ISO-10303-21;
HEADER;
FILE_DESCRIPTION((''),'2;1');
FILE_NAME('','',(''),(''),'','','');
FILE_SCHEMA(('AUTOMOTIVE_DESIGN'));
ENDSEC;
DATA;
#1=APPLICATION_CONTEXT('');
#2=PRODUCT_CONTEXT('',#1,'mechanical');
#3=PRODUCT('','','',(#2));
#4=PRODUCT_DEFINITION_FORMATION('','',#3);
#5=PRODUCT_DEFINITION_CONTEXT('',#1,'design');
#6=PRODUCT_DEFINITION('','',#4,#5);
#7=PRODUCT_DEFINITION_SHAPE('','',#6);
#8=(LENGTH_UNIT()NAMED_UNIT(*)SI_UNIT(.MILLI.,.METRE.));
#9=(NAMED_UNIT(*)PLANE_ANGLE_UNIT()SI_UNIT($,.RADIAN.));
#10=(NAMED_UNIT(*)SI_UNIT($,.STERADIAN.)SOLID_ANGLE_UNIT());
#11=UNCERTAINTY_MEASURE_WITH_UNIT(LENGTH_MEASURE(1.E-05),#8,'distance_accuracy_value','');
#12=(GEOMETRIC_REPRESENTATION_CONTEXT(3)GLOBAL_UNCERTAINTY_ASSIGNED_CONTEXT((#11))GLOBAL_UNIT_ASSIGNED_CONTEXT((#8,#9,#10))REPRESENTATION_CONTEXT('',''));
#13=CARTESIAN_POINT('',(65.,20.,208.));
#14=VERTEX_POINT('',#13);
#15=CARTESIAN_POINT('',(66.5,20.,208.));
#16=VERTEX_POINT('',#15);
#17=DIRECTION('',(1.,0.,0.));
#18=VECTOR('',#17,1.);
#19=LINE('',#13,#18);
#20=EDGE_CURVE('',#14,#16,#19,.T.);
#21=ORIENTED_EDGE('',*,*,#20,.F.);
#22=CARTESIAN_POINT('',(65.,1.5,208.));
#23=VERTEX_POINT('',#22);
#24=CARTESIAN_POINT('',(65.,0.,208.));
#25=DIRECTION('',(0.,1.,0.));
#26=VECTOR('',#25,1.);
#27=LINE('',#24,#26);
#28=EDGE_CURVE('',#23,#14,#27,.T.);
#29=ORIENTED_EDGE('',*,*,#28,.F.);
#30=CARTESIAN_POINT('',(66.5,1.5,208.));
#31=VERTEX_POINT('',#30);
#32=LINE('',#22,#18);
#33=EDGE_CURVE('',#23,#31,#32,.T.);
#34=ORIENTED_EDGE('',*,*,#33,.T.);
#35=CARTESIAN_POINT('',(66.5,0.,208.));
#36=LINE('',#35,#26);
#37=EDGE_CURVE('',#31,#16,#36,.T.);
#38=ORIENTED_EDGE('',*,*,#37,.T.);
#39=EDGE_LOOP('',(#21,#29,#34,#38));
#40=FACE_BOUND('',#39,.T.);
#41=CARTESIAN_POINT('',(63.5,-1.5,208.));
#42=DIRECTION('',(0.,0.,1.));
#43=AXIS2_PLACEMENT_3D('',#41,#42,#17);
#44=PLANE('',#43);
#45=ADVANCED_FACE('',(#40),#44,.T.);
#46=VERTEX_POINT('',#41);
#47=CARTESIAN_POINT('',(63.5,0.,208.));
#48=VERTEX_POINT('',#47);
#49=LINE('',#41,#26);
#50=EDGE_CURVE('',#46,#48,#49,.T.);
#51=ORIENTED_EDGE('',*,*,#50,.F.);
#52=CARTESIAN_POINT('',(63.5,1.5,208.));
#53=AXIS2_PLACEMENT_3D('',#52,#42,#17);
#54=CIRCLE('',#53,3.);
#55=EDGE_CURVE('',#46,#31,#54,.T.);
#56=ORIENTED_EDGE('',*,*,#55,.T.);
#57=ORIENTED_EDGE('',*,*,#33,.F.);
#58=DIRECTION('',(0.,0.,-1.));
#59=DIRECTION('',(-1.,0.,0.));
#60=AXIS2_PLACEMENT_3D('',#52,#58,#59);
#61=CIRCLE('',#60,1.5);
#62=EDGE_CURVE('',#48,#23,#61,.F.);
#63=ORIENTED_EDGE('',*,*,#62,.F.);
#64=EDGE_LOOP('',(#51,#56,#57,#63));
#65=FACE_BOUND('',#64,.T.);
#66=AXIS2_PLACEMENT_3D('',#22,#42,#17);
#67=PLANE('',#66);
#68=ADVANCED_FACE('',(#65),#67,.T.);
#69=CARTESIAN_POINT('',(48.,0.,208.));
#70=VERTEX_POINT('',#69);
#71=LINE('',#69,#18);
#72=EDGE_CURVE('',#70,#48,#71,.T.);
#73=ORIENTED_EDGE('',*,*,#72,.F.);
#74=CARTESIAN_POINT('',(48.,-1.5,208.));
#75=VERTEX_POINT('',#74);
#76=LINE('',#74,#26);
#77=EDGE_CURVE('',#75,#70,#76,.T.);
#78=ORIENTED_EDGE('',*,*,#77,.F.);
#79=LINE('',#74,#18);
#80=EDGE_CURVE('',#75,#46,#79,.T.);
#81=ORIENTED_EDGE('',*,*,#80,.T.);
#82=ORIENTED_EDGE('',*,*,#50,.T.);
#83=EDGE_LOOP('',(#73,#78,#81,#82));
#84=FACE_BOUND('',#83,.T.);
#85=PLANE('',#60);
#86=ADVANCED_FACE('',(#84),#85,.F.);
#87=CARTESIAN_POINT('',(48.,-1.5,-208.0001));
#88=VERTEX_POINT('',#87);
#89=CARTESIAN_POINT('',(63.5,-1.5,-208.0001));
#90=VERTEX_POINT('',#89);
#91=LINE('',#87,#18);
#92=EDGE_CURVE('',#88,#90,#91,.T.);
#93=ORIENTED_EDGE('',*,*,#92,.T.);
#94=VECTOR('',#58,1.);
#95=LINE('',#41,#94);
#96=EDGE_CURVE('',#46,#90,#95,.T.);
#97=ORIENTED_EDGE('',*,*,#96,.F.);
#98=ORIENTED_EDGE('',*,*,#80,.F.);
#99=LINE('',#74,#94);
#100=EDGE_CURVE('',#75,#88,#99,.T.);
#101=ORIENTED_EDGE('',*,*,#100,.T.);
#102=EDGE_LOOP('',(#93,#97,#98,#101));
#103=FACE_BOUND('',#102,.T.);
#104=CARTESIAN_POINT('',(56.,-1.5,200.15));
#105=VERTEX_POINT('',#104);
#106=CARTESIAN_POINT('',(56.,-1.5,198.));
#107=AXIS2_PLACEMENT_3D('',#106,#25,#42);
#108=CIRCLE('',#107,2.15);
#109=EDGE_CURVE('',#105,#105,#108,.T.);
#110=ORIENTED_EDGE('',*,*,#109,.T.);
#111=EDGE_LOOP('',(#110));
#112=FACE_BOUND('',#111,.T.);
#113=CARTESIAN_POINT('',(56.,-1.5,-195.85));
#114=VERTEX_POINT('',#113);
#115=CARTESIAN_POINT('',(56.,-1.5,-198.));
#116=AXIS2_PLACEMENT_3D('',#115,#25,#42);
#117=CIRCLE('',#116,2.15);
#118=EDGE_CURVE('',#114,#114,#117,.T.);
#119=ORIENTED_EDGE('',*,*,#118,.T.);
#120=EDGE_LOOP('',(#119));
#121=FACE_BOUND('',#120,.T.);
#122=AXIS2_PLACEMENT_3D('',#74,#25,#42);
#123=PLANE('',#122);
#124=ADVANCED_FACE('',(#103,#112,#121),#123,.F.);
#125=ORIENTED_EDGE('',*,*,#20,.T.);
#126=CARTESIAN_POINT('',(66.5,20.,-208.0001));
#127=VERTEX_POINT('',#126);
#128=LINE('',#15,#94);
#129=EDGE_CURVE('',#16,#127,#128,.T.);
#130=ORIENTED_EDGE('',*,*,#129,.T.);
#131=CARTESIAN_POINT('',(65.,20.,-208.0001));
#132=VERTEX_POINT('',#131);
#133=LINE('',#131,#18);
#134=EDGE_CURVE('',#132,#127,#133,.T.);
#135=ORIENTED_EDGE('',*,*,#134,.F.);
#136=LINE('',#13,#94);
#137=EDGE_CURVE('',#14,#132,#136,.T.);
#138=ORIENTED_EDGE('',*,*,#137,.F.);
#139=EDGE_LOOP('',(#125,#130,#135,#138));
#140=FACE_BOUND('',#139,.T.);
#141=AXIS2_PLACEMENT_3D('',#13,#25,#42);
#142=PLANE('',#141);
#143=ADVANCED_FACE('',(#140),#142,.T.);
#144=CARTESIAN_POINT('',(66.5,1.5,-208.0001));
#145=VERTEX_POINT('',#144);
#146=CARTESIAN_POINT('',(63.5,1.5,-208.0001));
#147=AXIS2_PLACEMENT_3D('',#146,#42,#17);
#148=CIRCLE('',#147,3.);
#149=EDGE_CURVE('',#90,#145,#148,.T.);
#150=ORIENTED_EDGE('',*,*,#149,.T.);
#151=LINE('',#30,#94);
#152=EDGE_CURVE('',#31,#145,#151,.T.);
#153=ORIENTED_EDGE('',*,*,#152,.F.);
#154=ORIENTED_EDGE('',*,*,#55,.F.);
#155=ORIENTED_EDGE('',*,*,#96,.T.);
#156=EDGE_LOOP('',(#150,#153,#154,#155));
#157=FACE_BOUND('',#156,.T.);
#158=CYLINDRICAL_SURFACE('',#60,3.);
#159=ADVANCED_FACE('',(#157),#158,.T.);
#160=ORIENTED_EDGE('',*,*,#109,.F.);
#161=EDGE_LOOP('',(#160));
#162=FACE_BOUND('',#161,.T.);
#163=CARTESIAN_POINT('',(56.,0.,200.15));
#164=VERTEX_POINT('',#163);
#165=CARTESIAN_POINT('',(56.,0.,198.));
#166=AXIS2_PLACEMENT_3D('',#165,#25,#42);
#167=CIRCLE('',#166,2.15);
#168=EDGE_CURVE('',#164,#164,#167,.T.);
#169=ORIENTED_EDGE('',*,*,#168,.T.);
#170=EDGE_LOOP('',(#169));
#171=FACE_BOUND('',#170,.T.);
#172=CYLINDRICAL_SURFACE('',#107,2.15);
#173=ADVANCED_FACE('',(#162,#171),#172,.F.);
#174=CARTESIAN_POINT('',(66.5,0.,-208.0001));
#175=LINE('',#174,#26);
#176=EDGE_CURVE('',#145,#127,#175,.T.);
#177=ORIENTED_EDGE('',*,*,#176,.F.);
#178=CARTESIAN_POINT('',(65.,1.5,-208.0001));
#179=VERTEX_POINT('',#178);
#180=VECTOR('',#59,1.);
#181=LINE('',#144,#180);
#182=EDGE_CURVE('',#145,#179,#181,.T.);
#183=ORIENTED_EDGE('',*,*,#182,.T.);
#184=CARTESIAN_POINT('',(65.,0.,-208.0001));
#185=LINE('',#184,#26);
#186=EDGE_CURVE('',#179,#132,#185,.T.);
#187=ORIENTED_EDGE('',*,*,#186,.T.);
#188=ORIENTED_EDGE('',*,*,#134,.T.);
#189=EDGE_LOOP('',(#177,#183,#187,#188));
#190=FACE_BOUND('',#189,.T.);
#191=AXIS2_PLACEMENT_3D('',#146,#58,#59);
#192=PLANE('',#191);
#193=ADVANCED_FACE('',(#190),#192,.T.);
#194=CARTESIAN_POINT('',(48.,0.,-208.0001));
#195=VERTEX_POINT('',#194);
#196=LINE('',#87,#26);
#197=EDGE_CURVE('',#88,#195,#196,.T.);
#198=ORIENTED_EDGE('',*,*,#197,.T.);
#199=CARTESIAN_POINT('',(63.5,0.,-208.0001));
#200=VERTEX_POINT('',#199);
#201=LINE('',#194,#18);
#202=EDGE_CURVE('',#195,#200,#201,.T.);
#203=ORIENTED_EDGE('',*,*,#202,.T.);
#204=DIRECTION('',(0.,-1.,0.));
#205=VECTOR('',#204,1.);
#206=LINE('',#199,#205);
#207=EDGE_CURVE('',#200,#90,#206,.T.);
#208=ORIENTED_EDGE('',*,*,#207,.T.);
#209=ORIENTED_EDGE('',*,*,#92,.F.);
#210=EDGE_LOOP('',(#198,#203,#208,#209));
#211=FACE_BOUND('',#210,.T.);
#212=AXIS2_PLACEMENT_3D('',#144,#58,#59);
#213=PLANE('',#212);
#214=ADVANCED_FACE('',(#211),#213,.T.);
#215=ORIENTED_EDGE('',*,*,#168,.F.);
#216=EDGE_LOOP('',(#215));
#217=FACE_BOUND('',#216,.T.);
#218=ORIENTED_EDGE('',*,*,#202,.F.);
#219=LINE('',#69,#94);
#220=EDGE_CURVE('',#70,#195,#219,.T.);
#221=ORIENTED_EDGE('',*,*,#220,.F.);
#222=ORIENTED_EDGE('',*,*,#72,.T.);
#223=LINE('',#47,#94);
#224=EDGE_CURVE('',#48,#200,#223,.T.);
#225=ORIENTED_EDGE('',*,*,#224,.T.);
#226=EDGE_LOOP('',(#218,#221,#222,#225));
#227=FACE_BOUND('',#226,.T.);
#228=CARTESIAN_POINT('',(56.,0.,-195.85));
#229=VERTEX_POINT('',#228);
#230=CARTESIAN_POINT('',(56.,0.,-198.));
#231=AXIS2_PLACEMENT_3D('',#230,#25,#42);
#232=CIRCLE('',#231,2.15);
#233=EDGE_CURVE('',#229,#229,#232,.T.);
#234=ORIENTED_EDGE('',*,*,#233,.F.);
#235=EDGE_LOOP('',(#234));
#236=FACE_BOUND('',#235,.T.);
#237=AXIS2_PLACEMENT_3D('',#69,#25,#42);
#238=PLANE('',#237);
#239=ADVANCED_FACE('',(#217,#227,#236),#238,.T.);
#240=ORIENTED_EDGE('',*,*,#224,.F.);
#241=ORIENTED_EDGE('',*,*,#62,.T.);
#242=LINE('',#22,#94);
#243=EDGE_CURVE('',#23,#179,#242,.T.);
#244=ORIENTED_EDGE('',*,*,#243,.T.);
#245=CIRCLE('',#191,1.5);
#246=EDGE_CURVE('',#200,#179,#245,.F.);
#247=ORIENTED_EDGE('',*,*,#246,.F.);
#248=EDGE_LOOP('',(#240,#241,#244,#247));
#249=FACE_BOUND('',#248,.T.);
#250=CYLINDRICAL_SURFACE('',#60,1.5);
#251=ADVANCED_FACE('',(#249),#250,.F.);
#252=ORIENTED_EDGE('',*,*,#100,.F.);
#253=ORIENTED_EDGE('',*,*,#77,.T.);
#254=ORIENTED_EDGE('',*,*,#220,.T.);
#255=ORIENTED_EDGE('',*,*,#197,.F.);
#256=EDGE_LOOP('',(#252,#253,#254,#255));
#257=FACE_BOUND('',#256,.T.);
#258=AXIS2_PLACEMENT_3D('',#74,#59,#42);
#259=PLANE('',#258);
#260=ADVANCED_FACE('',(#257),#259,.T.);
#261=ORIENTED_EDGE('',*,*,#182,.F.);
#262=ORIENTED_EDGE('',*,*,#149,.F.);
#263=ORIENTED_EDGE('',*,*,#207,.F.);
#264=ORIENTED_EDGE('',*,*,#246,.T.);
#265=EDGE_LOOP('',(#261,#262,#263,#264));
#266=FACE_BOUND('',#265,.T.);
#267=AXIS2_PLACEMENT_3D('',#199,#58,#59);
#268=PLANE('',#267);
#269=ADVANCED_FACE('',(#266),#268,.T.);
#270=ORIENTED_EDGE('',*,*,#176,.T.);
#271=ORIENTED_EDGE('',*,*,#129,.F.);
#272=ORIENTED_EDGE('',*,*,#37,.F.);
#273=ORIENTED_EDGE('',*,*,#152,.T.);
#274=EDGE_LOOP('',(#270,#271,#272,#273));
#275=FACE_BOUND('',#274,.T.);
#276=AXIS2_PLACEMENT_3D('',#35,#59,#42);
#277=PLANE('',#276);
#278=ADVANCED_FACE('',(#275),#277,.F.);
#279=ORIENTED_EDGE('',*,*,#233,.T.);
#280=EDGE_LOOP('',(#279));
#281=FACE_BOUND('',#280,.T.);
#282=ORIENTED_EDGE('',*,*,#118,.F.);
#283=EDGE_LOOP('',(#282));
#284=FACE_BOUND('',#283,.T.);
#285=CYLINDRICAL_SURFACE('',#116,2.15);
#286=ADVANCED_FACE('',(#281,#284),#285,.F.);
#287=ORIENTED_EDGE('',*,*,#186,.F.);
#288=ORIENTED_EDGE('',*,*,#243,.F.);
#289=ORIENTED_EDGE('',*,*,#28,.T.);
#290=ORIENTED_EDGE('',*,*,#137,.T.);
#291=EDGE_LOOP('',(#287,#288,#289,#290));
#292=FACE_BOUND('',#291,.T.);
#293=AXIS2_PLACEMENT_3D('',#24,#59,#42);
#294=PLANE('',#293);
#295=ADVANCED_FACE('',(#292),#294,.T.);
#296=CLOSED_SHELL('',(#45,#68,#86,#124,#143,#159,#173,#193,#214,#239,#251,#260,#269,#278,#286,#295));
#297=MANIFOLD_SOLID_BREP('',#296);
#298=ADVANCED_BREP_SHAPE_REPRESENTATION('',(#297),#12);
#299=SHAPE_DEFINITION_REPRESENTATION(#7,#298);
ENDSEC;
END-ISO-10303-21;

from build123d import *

# Parameters (mm, degrees)
SM_GUIDE_DEPTH  = 416
SK_HOLES_R      = 2.15
CUT_HOLES_DEPTH = 1.5


# Sheet-metal steps are written as plain solids
with BuildPart() as part:
    # SK_Guide → SM_Guide (new body)
    with BuildSketch(Plane.XY.offset(-208)):
        with BuildLine():
            Line((48, 0), (63.5, 0))
            ThreePointArc((63.5, 0), (64.560660172, 0.439339828), (65, 1.5))
            Line((65, 1.5), (65, 20))
            Line((65, 20), (66.5, 20))
            Line((66.5, 20), (66.5, 1.5))
            ThreePointArc((66.5, 1.5), (65.621320344, -0.621320344), (63.5, -1.5))
            Line((63.5, -1.5), (48, -1.5))
            Line((48, -1.5), (48, 0))
        make_face()
    extrude(amount=SM_GUIDE_DEPTH)

    # SK_Holes → CUT_Holes (cut)
    with BuildSketch(Plane(origin=(0, 0, 0), x_dir=(1, 0, 0), z_dir=(0, 1, 0))):
        with Locations(Location((56, -198, 0), (0, 0, 270))):
            Circle(SK_HOLES_R)
        with Locations(Location((56, 198, 0), (0, 0, 270))):
            Circle(SK_HOLES_R)
    extrude(amount=-CUT_HOLES_DEPTH, mode=Mode.SUBTRACT)


solid = part.part
